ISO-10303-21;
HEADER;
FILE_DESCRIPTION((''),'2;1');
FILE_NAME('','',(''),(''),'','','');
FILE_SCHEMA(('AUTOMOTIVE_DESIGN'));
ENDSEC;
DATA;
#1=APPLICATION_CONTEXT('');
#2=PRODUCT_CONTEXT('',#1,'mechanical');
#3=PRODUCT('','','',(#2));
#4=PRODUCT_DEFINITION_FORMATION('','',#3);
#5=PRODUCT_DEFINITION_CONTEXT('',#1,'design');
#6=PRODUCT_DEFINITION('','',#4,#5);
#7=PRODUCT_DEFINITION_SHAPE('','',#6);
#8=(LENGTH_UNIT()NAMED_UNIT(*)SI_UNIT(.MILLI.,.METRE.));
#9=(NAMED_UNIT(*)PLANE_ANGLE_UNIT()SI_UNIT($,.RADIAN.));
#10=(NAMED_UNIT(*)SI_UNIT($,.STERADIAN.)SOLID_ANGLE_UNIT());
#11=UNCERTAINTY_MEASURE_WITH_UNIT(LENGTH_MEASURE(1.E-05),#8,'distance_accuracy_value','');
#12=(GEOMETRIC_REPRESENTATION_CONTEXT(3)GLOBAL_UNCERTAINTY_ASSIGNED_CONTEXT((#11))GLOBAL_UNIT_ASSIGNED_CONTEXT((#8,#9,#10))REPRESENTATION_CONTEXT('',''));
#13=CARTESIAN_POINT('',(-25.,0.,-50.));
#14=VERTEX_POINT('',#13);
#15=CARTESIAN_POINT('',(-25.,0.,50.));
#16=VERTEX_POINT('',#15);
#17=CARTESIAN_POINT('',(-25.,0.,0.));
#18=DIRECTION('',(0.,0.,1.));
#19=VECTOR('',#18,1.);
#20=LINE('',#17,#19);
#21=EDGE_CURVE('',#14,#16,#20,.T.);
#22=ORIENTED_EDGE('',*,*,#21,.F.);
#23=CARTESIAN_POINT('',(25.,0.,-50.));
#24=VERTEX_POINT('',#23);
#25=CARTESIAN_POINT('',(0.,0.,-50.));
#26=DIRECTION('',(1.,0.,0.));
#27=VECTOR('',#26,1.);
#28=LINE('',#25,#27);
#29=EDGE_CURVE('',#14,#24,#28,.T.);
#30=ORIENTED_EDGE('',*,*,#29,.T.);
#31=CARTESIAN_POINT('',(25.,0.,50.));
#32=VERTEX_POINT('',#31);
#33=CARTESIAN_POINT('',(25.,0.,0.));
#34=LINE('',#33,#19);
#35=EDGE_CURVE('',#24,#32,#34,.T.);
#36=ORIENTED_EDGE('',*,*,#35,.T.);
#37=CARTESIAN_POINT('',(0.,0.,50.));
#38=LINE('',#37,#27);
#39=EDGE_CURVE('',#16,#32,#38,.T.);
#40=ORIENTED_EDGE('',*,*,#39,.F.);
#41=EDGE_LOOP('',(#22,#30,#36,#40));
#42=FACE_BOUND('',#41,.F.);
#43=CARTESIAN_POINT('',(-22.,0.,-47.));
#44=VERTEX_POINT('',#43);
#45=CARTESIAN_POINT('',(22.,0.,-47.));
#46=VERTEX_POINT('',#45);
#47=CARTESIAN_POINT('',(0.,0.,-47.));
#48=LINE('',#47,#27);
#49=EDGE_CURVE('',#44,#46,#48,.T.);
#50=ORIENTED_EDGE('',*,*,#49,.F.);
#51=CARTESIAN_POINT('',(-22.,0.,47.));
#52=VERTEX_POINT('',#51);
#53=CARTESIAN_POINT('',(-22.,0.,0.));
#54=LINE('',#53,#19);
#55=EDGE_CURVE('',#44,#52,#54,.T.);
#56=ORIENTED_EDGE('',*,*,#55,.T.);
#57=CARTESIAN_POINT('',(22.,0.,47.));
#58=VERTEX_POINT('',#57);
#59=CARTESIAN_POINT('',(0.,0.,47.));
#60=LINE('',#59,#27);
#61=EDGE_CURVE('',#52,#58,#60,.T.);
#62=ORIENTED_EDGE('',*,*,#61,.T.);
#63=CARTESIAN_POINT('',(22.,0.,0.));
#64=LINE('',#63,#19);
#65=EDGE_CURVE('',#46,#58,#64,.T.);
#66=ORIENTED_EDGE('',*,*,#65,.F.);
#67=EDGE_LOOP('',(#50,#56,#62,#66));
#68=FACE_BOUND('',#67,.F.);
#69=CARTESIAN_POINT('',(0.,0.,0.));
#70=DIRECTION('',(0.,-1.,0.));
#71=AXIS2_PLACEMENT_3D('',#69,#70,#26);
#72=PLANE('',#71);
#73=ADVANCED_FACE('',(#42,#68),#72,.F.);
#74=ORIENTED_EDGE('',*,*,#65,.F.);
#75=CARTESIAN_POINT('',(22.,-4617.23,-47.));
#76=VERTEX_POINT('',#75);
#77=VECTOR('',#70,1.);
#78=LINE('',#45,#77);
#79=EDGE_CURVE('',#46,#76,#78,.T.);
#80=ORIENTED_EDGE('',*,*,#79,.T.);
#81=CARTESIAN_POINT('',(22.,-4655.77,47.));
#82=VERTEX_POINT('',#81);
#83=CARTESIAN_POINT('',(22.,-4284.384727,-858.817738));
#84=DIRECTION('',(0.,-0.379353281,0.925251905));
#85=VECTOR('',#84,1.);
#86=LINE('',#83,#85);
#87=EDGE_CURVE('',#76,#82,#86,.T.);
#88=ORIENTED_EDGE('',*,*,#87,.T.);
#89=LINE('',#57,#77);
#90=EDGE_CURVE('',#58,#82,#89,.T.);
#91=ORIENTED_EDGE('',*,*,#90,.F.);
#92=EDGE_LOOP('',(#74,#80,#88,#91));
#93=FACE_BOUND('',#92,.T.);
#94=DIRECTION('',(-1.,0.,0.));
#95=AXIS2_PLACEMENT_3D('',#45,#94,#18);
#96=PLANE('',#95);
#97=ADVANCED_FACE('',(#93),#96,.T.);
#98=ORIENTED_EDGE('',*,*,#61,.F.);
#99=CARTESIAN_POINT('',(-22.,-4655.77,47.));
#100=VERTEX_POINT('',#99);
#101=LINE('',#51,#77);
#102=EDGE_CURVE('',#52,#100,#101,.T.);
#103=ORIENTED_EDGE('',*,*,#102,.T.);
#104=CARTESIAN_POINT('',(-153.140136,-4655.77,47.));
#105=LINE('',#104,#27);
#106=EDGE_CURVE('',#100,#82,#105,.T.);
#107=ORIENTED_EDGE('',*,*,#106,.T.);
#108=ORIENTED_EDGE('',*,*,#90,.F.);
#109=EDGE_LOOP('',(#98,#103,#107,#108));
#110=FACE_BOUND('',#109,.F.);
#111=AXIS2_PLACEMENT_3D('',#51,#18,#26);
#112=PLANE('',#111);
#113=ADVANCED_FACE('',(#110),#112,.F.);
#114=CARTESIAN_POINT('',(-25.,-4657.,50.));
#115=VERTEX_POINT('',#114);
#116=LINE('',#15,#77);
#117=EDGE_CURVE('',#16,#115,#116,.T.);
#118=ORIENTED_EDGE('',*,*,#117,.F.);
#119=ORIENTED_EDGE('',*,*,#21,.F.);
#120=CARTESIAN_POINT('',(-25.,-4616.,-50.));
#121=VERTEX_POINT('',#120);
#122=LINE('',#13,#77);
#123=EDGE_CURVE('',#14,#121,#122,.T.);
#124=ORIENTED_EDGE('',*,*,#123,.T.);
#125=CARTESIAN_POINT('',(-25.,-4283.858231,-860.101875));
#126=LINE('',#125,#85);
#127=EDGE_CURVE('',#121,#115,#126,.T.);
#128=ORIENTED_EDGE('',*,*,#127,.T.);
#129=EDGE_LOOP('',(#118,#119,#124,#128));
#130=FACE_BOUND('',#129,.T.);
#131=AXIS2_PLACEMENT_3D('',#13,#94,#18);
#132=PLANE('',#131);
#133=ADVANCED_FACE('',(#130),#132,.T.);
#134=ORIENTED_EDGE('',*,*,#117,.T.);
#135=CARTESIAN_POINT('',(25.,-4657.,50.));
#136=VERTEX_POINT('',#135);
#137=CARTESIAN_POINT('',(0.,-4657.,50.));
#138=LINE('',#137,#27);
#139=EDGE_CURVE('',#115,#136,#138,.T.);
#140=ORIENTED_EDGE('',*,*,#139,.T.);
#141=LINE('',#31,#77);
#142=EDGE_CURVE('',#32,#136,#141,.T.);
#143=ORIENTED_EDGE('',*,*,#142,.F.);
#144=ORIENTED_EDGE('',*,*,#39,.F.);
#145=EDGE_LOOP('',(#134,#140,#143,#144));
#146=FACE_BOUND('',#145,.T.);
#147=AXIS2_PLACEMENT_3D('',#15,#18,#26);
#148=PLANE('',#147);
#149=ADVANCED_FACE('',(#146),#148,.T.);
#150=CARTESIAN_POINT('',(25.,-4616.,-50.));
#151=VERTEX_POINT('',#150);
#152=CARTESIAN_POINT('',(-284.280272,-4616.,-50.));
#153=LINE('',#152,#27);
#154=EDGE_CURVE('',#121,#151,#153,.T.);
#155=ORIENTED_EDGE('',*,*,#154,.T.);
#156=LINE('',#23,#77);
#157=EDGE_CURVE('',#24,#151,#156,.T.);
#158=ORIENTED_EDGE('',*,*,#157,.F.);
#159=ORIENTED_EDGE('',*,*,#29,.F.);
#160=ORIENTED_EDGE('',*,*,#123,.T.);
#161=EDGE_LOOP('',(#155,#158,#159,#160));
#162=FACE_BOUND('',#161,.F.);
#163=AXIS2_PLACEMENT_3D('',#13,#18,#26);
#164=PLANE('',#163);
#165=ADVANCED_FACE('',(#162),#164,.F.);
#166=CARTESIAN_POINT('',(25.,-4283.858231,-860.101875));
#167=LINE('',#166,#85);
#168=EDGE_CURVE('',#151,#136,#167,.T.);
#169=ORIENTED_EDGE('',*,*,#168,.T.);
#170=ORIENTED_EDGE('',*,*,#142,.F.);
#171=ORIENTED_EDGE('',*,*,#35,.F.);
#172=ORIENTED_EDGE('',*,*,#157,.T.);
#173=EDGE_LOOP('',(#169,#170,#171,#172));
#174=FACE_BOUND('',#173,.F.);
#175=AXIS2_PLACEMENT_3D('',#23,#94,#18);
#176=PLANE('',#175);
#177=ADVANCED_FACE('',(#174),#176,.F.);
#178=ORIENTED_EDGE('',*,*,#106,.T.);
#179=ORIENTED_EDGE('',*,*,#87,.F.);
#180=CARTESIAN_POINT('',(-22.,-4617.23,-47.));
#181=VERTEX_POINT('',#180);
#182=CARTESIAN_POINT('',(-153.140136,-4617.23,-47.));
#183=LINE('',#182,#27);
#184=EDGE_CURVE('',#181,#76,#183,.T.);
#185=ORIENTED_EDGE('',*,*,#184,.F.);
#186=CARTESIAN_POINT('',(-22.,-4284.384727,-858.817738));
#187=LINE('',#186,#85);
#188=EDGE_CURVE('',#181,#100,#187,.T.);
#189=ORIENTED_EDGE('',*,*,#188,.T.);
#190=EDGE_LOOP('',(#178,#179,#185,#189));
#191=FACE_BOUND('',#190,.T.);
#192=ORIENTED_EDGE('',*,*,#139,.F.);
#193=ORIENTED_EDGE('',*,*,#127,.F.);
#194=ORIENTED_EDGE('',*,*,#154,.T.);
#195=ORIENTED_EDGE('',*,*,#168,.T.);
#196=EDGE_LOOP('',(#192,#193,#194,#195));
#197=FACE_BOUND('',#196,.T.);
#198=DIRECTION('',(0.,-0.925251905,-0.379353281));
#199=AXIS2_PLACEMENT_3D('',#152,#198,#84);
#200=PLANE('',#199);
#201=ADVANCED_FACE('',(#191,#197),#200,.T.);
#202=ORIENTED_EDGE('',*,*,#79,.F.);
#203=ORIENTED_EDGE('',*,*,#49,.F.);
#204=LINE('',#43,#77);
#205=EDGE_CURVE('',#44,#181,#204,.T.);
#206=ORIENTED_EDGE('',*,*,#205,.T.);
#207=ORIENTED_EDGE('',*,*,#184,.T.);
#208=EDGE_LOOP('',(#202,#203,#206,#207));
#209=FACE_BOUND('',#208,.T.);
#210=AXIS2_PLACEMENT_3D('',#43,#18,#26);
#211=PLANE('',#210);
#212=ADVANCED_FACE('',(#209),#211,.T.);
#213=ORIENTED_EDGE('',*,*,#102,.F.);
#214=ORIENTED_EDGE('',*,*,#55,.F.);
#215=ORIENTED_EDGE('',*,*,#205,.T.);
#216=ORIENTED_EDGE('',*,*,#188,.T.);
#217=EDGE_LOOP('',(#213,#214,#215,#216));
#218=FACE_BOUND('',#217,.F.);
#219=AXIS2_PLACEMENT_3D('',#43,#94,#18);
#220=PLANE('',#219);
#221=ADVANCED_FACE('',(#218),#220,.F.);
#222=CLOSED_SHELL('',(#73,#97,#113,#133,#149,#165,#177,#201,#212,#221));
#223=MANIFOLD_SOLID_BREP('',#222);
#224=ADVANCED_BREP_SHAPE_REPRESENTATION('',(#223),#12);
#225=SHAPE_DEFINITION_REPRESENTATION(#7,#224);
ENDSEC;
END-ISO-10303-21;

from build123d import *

# Parameters (mm, degrees)
F0_W        = 50
F0_H        = 100
F0_W_2      = 44
F0_H_2      = 94
F1_DEPTH    = 4657
F2_T1_DEPTH = 568.5605442995


# Not quite as in the source:
# - a fillet or chamfer that OpenCascade refuses, or shapes differently, is made with other operations: its cross-section is extruded or revolved along the edge and cut away or added


with BuildPart() as f1:
    # F0 (on Front) → F1 (new body)
    with BuildSketch(Plane.XZ):
        Rectangle(F0_W, F0_H)
        Rectangle(F0_W_2, F0_H_2, mode=Mode.SUBTRACT)
    extrude(amount=F1_DEPTH)

    # F2: chamfer of 41 x 100 on 1 edges, made by hand

    # F2_s2 → F2_t1 (cut)
    with BuildSketch(Plane.YZ.offset(-284.2802721497)):
        Polygon((-4616, -50), (-4657, 50), (-4657, -50), align=None)
    extrude(amount=F2_T1_DEPTH, mode=Mode.SUBTRACT)


solid = f1.part
